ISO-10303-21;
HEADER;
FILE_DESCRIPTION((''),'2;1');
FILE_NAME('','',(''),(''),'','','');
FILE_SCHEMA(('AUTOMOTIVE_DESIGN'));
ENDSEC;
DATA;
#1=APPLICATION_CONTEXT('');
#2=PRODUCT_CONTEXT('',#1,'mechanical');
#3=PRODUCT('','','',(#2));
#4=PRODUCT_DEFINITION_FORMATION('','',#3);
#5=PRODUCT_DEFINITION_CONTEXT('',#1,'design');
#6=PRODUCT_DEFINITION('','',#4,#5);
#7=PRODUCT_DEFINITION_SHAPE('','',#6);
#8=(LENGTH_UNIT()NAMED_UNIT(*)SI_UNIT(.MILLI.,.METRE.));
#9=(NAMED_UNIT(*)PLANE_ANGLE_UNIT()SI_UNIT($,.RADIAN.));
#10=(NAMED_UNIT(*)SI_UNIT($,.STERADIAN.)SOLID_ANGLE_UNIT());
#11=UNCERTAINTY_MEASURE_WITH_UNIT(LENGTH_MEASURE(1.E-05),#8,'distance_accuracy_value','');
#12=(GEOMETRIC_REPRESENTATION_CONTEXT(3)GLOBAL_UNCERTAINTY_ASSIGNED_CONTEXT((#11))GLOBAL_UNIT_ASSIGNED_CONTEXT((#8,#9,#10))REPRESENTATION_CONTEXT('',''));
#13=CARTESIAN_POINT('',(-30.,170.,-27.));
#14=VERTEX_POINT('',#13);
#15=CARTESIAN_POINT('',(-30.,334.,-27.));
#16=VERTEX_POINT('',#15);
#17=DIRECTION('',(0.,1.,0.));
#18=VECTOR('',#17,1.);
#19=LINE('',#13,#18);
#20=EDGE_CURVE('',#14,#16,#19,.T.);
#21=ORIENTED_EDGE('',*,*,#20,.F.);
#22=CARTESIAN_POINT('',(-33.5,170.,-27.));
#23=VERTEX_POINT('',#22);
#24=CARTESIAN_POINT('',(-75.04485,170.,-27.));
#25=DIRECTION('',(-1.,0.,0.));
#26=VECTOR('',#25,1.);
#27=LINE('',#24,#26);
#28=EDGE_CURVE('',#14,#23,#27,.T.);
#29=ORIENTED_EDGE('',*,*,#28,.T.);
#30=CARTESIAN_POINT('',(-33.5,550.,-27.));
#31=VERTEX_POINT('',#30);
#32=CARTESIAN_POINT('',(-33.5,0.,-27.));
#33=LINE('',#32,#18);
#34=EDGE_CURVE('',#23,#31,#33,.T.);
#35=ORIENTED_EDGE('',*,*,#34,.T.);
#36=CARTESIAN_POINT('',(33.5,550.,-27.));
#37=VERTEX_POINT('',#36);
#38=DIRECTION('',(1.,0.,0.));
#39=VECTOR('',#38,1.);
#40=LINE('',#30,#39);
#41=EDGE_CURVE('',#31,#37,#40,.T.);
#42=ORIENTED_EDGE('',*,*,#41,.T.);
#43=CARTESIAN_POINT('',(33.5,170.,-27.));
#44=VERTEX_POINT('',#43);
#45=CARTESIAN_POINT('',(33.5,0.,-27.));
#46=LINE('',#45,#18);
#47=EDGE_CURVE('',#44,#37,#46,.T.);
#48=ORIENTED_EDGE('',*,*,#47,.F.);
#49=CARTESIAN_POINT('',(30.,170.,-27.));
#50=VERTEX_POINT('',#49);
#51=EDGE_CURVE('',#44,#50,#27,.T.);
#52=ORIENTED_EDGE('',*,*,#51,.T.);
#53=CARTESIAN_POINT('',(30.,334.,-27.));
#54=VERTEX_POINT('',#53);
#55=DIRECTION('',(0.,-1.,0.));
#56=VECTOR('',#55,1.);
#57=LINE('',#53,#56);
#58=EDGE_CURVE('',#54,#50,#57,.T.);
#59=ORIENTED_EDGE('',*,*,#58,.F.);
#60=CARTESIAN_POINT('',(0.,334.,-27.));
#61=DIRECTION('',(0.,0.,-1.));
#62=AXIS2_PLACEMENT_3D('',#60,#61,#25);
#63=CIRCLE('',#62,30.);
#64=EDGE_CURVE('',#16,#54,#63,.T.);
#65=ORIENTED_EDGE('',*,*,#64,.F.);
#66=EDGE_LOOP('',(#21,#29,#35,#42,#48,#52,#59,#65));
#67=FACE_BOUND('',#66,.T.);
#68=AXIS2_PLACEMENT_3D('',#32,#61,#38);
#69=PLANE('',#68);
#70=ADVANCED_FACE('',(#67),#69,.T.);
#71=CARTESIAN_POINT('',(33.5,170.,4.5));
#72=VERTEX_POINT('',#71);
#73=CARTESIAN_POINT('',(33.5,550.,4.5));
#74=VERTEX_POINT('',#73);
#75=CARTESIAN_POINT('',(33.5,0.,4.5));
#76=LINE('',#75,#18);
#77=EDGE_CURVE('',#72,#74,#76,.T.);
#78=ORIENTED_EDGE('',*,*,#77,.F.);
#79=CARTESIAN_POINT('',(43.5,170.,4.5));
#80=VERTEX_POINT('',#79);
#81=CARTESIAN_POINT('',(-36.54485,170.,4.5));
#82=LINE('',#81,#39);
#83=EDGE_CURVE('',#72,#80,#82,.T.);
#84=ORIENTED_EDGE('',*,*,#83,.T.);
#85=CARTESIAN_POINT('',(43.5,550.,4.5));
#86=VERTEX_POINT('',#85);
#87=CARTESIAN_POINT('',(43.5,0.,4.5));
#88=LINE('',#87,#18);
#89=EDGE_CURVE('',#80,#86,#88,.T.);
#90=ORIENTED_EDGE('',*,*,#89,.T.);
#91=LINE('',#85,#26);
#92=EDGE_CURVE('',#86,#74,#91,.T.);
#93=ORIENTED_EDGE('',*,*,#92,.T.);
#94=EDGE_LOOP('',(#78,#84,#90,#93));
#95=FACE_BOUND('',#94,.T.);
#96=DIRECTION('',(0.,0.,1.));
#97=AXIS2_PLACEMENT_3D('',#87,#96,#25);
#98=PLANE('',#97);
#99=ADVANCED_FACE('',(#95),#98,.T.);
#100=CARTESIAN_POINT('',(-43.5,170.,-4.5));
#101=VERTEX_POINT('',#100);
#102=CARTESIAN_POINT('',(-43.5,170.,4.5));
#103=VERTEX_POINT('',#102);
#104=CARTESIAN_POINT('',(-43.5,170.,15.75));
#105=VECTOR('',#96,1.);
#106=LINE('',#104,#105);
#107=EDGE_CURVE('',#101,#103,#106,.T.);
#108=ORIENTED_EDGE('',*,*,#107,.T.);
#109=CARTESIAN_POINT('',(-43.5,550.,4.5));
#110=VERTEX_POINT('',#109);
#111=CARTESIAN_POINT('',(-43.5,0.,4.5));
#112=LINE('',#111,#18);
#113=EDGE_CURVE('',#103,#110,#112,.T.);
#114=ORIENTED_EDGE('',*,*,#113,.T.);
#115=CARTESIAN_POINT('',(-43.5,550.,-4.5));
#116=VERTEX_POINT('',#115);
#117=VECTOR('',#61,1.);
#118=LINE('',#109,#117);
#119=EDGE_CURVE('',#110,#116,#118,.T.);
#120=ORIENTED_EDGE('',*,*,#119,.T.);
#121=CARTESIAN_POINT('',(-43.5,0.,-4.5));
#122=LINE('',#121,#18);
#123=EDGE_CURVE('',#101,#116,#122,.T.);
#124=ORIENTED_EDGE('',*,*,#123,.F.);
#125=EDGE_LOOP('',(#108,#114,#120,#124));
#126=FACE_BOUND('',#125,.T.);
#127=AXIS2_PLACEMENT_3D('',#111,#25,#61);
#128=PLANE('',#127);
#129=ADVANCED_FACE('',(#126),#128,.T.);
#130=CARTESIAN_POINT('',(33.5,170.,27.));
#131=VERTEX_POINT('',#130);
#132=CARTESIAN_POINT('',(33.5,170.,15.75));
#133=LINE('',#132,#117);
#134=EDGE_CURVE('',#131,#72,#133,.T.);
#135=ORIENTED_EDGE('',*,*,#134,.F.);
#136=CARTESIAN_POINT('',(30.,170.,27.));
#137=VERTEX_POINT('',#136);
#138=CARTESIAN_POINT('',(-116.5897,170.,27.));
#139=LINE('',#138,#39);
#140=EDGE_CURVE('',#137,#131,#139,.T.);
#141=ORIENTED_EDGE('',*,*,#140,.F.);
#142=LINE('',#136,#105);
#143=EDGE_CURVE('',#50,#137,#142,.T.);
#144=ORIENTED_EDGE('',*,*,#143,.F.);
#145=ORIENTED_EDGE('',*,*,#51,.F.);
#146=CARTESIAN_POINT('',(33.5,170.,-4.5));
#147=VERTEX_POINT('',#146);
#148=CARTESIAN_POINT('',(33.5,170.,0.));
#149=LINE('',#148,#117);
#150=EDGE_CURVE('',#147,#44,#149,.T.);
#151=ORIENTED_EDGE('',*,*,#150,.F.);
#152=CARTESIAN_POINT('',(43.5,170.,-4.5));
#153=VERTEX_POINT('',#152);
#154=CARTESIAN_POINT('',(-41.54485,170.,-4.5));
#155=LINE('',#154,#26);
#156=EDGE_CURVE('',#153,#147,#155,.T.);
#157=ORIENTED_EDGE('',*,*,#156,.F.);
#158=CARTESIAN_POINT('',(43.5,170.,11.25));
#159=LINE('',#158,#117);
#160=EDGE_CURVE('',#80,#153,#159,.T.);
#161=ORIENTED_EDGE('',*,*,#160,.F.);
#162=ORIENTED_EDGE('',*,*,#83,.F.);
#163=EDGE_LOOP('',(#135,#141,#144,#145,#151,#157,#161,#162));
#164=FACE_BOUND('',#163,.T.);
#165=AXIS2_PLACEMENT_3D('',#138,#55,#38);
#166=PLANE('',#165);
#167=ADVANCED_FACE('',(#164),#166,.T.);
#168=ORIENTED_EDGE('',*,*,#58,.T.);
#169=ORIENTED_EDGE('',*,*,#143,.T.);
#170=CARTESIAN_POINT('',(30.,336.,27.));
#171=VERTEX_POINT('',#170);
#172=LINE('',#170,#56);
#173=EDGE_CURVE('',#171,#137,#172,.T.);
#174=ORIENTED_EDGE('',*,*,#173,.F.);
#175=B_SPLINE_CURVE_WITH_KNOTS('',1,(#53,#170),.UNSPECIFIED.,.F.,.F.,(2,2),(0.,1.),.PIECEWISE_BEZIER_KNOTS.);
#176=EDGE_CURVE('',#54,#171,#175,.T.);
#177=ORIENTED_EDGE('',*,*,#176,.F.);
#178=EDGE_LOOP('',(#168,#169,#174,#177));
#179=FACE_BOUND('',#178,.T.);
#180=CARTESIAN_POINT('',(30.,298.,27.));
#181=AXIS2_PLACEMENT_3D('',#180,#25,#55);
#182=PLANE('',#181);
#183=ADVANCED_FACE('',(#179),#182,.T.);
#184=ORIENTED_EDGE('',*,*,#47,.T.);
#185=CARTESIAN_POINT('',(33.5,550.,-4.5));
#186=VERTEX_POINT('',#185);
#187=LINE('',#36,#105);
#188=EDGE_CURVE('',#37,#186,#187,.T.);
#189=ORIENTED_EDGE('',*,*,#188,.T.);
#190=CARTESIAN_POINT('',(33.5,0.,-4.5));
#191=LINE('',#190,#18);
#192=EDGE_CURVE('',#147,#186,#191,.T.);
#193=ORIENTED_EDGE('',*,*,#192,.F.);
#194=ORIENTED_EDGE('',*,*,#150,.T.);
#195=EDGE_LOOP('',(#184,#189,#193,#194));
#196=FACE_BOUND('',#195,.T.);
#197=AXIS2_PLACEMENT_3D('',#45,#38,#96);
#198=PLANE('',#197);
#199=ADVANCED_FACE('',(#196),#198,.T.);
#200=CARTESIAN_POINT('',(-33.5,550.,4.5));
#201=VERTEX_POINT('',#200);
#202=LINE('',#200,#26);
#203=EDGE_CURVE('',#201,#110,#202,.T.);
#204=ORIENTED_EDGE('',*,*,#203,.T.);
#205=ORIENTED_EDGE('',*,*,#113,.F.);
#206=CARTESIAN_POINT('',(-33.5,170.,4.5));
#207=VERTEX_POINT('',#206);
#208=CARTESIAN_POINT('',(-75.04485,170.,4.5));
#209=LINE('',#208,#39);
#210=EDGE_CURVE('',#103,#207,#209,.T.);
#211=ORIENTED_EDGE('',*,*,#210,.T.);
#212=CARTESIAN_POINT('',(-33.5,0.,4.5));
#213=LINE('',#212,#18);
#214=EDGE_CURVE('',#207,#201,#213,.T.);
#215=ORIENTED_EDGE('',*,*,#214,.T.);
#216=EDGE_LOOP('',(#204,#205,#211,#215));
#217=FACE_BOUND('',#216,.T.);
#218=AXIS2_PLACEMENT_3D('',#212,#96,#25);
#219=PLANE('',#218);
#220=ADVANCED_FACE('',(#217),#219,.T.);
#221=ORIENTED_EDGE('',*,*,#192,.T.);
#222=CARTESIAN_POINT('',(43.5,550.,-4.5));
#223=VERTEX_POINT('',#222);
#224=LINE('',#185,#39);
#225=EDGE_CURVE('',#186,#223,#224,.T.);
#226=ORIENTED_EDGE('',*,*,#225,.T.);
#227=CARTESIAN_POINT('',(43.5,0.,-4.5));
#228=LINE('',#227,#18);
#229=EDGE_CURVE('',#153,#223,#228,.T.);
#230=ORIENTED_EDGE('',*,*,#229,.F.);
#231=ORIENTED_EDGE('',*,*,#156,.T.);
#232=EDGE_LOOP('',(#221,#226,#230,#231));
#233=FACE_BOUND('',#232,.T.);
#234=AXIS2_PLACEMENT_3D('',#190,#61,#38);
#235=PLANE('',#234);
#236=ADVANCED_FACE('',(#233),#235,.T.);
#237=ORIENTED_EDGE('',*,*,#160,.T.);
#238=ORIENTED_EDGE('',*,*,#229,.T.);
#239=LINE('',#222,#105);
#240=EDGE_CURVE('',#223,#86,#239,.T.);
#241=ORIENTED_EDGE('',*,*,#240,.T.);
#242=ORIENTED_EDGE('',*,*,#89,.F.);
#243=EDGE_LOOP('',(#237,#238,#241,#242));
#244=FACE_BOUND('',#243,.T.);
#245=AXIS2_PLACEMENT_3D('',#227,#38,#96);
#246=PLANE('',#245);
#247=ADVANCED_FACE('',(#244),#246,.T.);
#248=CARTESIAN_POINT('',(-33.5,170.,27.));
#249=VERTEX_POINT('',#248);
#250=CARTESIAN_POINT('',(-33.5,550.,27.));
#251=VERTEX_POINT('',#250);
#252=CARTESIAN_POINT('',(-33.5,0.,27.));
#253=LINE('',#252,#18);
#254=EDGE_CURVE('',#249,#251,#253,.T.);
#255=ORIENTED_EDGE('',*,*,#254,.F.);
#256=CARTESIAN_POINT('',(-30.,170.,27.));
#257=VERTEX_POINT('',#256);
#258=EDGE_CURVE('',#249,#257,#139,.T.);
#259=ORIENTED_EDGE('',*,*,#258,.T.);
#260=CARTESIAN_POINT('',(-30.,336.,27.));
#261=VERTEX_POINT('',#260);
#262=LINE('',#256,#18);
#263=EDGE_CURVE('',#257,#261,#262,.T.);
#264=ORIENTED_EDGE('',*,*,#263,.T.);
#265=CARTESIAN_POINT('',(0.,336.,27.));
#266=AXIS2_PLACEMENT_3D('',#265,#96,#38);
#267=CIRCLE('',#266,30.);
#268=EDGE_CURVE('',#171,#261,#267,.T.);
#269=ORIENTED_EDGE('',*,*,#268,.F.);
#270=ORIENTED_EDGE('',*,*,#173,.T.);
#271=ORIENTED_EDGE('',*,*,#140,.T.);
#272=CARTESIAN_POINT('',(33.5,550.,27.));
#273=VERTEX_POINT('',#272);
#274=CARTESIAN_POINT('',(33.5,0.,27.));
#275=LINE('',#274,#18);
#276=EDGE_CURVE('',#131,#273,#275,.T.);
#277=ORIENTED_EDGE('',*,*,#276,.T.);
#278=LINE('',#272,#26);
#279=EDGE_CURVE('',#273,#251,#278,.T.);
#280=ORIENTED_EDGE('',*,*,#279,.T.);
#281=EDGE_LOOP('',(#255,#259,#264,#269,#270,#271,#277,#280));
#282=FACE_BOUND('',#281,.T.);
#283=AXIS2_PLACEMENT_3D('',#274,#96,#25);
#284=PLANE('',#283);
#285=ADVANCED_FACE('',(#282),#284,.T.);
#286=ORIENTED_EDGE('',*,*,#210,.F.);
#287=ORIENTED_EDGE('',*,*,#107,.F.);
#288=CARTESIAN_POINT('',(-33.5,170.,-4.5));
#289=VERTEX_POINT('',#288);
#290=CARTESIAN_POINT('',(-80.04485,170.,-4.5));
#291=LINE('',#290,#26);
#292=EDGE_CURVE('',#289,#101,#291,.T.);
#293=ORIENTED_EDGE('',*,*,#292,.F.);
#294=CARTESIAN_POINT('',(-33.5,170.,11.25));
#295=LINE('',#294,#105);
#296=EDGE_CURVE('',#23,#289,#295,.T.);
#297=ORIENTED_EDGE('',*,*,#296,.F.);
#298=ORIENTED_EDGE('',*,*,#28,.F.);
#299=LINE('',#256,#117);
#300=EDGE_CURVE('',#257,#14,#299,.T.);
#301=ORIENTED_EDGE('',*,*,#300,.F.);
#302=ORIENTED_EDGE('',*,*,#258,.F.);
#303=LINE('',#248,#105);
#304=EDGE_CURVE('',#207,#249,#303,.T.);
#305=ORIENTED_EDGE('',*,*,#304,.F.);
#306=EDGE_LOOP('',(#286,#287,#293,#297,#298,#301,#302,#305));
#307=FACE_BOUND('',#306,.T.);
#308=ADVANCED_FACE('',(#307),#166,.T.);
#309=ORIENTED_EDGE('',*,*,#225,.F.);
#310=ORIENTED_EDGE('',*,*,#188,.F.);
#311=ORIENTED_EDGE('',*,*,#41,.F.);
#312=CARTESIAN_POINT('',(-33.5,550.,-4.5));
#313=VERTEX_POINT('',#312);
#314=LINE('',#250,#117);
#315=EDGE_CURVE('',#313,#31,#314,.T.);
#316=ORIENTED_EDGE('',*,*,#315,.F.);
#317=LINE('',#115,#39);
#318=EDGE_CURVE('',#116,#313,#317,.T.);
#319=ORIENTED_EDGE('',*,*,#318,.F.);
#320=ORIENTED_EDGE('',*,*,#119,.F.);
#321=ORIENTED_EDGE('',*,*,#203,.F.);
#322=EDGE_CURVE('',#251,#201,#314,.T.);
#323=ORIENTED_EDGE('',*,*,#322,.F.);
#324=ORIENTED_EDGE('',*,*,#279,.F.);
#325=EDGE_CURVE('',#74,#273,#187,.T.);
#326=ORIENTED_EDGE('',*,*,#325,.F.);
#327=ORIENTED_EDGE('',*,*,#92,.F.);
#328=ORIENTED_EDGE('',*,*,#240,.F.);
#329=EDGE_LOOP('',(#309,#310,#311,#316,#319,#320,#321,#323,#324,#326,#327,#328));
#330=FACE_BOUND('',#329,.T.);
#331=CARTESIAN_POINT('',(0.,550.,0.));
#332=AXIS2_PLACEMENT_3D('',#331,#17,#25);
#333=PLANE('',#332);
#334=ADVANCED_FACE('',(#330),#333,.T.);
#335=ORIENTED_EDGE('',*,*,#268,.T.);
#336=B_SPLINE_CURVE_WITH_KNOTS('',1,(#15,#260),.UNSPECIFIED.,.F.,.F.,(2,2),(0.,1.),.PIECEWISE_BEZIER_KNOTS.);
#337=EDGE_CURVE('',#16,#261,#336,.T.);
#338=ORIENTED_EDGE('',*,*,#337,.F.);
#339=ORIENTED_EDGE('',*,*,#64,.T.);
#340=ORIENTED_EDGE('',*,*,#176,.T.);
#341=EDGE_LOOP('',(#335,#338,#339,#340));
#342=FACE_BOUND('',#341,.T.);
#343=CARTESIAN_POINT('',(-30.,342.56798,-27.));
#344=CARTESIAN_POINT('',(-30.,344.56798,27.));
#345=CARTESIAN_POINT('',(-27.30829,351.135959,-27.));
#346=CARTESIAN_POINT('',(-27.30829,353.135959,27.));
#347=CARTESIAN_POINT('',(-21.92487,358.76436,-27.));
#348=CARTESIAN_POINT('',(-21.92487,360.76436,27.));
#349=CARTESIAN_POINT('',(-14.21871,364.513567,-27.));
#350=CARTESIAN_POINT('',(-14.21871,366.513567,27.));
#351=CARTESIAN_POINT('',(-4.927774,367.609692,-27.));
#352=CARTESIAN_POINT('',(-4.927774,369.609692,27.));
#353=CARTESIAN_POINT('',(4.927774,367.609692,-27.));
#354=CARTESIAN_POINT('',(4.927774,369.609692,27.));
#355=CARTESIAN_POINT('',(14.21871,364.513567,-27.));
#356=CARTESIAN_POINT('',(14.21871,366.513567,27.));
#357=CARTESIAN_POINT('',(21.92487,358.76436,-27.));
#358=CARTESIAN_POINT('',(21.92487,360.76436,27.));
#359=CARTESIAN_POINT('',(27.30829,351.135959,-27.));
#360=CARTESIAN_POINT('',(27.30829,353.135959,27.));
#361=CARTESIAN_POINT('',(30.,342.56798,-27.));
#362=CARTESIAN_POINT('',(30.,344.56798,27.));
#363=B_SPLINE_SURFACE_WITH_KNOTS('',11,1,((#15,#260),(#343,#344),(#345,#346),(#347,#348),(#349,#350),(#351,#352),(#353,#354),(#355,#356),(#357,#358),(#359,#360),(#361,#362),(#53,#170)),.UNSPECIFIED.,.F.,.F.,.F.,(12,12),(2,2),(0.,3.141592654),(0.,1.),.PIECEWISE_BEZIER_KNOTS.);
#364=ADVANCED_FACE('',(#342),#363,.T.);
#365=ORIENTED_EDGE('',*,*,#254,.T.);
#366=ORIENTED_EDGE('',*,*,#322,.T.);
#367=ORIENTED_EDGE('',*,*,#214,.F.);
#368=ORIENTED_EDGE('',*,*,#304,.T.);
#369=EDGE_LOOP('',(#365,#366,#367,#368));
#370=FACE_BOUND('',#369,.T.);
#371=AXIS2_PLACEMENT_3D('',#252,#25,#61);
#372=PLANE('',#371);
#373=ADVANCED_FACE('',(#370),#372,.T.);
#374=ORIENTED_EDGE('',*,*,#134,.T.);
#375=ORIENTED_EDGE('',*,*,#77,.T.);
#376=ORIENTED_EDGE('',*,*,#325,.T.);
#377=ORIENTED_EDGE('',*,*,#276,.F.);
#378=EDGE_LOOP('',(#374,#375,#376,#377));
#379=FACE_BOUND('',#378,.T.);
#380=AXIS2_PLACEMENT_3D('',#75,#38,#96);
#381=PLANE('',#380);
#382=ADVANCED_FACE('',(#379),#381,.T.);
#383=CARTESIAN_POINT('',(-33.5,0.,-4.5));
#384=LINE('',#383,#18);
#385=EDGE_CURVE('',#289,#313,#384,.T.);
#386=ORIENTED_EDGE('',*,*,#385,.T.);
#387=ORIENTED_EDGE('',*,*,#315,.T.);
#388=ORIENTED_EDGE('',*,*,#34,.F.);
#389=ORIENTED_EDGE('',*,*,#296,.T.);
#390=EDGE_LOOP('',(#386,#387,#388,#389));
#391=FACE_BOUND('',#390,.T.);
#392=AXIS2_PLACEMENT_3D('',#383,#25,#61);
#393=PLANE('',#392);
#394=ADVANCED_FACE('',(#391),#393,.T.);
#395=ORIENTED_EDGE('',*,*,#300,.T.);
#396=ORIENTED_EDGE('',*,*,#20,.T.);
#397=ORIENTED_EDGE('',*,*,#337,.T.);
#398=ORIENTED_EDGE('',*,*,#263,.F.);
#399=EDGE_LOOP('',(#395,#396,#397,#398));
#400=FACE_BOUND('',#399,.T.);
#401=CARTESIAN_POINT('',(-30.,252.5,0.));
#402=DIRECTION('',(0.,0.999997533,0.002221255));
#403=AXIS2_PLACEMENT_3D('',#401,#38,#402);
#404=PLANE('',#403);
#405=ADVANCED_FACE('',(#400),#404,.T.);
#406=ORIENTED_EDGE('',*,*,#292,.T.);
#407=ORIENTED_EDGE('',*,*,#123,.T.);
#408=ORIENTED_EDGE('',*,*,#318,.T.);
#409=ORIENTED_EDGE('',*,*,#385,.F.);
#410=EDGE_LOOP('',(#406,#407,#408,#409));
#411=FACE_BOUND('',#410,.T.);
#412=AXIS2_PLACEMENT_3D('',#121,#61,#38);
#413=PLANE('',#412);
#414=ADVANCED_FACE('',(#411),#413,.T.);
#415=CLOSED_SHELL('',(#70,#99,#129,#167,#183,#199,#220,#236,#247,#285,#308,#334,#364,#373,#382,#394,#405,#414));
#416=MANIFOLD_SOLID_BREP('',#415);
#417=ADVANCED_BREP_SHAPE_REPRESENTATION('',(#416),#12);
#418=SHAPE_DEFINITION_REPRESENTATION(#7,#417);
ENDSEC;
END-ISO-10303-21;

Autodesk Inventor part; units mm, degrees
ref_plane "YZ Plane" through (0, 0, 0) normal (1, 0, 0) x (0, 1, 0)
ref_plane "XZ Plane" through (0, 0, 0) normal (0, 1, 0) x (-1, 0, 0)
ref_plane "XY Plane" through (0, 0, 0) normal (0, 0, 1) x (1, 0, 0)
sketch "草圖1" plane through (0, 0, 0) normal (0, 1, 0) x (-1, 0, 0)
  line L0 (-33.5, 27) -> (33.5, 27)
  line L1 (33.5, 27) -> (33.5, -27)
  line L2 (33.5, -27) -> (-33.5, -27)
  line L3 (-33.5, -27) -> (-33.5, 27)
  line L4 (-33.5, 27) -> (33.5, -27) construction
  line L5 (33.5, 27) -> (-33.5, -27) construction
  line L6 (43.5, -4.5) -> (33.5, -4.5)
  line L7 (33.5, -4.5) -> (33.5, 4.5)
  line L8 (33.5, 4.5) -> (43.5, 4.5)
  line L9 (43.5, 4.5) -> (43.5, -4.5)
  line L10 (-33.5, -4.5) -> (-43.5, -4.5)
  line L11 (-43.5, -4.5) -> (-43.5, 4.5)
  line L12 (-43.5, 4.5) -> (-33.5, 4.5)
  line L13 (-33.5, 4.5) -> (-33.5, -4.5)
  point P0 (0, 0)
  point P1 (33.5, 0)
  point P2 (-33.5, 0)
  point P3 (-33.5, 4.5)
  point P4 (-33.5, -4.5)
  dimension "d0" = 67
  dimension "d1" = 54
  dimension "d2" = 9
  dimension "d3" = 10
extrude "擠出1" add sketch "草圖1" along normal blind 550
sketch "草圖2" plane through (-33.5, 0, 27) normal (0, 0, 1) x (1, 0, 0)
  line L0 (0, 0) -> (0, 550) projected
  line L1 (0, 550) -> (67, 550) projected
  line L2 (67, 550) -> (67, 0) projected
  line L3 (67, 0) -> (0, 0) projected
  circle A0 centre (33.5, 298) radius 30
  line L4 (3.5, 298) -> (63.5, 298)
  line L5 (63.5, 298) -> (63.5, -29.8228)
  line L6 (63.5, -29.8228) -> (3.5, -29.8228)
  line L7 (3.5, -29.8228) -> (3.5, 298)
  point P0 (33.5, 0)
  point P1 (33.5, 0)
  point P2 (63.5, 298)
  point P3 (3.5, 298)
  dimension "d6" = 298
  dimension "d7" = 60
extrude "擠出2" cut sketch "草圖2" against normal through all contours L7 A0 L5 L3 | L3 L5 L6 L7 | L4 A0 | A0 L4
sketch "草圖3" plane through (-33.5, 550, 27) normal (0, 0, 1) x (1, 0, 0)
  line L0 (-83.0897, -380) -> (150.0897, -380)
  line L1 (150.0897, -380) -> (150.0897, -550)
  line L2 (150.0897, -550) -> (-83.0897, -550)
  line L3 (-83.0897, -550) -> (-83.0897, -380)
  point P0 (33.5, -550)
  point P1 (33.5, -550)
  dimension "d10" = 170
extrude "擠出3" cut sketch "草圖3" against normal through all
sketch "草圖4" plane through (33.5, 550, -27) normal (0, 0, -1) x (-1, 0, 0)
  arc A0 (63.5, -252) -> (3.5, -252) centre (33.5, -252) ccw construction
  circle A1 centre (33.5, -216) radius 30
  line L0 (63.5, -380) -> (3.5, -380)
  line L1 (3.5, -380) -> (3.5, -216)
  line L2 (3.5, -216) -> (63.5, -216)
  line L3 (63.5, -216) -> (63.5, -380)
  point P0 (33.5, -550)
  point P1 (63.5, -380)
  dimension "d13" = 36
  dimension "d14" = 60
sketch "草圖5" plane through (-33.5, 550, 27) normal (0, 0, 1) x (1, 0, 0)
  circle A0 centre (33.5, -214) radius 30
  arc A1 (63.5, -252) -> (3.5, -252) centre (33.5, -252) ccw construction
  line L0 (63.5, -380) -> (3.5, -380)
  line L1 (3.5, -380) -> (3.5, -214)
  line L2 (3.5, -214) -> (63.5, -214)
  line L3 (63.5, -214) -> (63.5, -380)
  point P0 (33.5, -550)
  point P1 (63.5, -380)
  dimension "d15" = 38
  dimension "d16" = 60
loft "斷面混成1" cut profiles "草圖4", "草圖5"
properties part number "Slider-10"
